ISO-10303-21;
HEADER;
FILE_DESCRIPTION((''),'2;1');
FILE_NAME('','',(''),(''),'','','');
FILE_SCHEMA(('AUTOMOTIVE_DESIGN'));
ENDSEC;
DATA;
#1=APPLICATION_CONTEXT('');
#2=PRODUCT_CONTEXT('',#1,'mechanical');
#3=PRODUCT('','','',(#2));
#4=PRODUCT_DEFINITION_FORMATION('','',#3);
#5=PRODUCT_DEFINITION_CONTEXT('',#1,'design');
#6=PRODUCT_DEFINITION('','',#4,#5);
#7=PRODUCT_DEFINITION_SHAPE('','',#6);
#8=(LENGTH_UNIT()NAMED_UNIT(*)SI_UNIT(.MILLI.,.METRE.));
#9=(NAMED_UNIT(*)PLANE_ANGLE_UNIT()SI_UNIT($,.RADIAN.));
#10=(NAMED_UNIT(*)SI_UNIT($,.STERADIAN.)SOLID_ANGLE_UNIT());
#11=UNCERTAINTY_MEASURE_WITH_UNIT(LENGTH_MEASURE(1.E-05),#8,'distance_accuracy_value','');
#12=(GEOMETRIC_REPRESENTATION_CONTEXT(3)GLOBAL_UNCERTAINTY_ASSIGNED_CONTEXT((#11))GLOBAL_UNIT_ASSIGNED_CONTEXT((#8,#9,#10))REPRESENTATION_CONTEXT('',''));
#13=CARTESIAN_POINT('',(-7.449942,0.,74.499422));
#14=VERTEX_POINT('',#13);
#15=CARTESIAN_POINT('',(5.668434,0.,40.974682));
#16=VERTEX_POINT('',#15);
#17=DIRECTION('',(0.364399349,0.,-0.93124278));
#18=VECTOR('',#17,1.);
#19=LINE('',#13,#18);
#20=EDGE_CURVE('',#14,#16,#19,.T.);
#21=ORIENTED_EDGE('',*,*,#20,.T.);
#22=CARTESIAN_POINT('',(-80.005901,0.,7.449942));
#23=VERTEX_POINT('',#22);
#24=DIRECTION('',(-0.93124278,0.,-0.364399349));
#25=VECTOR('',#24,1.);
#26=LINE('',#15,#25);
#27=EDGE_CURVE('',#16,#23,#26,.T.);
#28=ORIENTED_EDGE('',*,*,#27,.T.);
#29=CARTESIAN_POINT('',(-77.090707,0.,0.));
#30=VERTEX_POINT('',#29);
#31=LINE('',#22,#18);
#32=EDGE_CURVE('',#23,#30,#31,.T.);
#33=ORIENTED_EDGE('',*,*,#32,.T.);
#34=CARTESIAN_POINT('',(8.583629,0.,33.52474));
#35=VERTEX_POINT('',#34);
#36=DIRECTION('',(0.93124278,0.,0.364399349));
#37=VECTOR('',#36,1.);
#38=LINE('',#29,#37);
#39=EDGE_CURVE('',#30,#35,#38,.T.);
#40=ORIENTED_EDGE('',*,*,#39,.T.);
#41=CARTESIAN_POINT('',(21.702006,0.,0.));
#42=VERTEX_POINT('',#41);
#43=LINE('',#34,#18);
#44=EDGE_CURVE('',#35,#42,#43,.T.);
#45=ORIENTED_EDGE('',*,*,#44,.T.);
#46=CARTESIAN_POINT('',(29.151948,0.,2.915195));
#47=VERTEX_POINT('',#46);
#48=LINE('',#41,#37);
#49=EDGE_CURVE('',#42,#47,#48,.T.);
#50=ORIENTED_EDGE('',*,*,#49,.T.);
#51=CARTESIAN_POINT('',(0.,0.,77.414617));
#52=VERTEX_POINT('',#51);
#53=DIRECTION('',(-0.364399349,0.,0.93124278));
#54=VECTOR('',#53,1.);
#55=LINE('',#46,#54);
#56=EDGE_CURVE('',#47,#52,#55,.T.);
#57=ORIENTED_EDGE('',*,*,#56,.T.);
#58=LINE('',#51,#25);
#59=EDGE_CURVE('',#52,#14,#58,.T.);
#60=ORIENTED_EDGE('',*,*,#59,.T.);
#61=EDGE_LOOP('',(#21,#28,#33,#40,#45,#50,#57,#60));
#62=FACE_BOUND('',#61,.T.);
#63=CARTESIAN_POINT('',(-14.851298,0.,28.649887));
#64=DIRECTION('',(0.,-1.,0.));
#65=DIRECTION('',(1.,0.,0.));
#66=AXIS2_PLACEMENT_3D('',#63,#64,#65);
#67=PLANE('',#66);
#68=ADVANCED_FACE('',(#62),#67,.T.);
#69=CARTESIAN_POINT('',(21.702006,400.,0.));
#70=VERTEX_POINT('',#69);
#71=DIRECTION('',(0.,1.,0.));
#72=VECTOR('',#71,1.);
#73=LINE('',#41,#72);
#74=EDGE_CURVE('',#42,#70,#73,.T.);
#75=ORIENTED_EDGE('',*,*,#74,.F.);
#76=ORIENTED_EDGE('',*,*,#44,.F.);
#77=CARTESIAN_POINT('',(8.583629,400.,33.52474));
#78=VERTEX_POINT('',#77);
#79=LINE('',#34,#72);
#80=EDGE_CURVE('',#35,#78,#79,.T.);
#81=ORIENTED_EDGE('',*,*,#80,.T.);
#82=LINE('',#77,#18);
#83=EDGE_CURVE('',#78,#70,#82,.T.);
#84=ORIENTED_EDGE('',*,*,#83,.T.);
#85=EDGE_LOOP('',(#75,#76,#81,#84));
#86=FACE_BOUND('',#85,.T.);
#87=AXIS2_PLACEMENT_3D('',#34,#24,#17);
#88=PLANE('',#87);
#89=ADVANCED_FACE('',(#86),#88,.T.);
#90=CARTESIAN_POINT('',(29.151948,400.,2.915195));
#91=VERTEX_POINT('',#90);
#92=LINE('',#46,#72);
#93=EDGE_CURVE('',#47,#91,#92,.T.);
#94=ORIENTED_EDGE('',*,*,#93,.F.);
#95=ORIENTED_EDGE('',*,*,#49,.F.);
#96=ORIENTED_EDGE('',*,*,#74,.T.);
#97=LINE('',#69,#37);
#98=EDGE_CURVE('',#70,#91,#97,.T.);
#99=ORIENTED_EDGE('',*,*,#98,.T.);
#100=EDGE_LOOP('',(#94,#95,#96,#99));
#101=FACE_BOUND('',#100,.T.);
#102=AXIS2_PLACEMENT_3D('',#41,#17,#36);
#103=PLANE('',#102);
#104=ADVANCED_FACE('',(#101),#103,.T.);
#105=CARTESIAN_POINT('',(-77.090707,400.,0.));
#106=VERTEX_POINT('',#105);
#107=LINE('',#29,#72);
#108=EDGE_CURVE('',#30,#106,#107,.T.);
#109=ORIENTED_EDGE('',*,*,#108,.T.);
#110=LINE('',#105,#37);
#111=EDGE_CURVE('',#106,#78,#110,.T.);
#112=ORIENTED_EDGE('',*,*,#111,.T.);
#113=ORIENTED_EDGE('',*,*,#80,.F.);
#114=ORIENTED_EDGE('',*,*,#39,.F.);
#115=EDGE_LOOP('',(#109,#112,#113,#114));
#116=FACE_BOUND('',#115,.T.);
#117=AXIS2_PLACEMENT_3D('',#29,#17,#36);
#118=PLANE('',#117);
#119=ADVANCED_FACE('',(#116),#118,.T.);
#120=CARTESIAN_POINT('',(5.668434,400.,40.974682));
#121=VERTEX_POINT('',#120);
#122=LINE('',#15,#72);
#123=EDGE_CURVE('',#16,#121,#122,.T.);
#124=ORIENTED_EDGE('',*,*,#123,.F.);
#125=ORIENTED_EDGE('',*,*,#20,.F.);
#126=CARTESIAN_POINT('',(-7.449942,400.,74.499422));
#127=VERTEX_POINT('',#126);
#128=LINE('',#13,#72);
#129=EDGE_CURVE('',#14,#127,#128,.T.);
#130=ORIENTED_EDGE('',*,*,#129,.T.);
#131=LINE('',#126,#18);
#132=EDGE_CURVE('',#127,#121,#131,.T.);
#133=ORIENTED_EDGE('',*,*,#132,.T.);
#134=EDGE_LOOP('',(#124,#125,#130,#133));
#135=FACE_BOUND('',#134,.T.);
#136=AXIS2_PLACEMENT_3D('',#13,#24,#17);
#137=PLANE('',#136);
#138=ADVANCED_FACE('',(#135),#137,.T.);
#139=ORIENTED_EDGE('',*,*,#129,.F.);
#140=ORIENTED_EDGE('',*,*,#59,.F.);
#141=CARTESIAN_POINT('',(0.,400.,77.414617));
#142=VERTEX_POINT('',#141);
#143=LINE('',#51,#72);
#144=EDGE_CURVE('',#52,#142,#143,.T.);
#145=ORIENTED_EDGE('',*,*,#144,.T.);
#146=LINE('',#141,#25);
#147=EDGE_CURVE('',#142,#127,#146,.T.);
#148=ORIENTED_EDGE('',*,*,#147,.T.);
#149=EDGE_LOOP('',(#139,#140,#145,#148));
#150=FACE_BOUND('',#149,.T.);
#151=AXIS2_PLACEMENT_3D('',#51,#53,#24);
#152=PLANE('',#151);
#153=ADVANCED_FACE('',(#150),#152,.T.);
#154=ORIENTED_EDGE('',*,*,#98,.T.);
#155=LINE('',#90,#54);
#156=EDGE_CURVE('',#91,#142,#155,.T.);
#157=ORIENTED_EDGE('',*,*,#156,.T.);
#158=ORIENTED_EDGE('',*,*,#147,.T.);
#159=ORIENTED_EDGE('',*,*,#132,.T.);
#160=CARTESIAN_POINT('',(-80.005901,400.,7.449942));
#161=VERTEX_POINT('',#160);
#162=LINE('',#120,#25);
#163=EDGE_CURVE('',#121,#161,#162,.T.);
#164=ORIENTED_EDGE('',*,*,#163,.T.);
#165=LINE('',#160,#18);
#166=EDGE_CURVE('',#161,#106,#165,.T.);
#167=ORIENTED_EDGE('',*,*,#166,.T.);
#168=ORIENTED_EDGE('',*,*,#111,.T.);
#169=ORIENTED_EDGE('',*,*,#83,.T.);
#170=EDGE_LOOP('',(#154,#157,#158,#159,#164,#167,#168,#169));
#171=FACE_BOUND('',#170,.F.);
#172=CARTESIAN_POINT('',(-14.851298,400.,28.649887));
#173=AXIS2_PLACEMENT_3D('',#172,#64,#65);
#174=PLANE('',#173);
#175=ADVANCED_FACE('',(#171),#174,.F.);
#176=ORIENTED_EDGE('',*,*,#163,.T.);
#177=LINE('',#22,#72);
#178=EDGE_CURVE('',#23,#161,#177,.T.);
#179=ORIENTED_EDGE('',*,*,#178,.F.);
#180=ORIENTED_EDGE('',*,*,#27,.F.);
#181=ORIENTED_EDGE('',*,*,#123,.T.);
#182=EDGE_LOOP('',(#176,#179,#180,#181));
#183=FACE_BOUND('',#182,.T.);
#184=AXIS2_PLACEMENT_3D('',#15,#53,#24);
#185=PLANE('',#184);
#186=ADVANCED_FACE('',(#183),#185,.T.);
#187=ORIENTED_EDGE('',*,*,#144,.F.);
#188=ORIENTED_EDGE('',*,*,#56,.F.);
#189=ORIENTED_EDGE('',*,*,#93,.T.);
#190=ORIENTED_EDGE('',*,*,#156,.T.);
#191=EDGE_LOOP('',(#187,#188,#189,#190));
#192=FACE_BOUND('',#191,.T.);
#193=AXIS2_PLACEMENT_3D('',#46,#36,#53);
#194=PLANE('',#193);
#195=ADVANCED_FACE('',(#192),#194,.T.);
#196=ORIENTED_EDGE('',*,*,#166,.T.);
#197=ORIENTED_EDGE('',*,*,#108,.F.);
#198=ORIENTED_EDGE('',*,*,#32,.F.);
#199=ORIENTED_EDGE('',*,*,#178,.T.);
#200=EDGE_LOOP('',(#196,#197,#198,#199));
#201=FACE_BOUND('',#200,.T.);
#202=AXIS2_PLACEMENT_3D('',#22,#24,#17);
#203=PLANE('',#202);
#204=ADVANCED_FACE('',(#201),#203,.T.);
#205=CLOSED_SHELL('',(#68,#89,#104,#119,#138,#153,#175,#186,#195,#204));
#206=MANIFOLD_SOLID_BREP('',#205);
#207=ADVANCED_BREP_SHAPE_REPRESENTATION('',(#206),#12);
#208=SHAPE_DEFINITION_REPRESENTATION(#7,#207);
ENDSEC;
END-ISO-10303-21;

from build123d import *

# Parameters (mm, degrees)
F1_DEPTH = 400


# Not quite as in the source:
# - the program builds the solid bodies; features that only make, move or delete a surface that nothing else refers to are left out


with BuildPart() as f1:
    # F0 (on Front) → F1 (new body)
    with BuildSketch(Plane.XZ):
        Polygon((-80.0059014217, 7.4499422376), (-77.090706633, 0), (8.5836290999, 33.5247400694), (21.7020056488, 0), (29.1519478864, 2.9151947886), (0, 77.4146171651), (-7.4499422376, 74.4994223765), (5.6684343113, 40.9746823071), align=None)
    extrude(amount=-F1_DEPTH)


solid = f1.part
